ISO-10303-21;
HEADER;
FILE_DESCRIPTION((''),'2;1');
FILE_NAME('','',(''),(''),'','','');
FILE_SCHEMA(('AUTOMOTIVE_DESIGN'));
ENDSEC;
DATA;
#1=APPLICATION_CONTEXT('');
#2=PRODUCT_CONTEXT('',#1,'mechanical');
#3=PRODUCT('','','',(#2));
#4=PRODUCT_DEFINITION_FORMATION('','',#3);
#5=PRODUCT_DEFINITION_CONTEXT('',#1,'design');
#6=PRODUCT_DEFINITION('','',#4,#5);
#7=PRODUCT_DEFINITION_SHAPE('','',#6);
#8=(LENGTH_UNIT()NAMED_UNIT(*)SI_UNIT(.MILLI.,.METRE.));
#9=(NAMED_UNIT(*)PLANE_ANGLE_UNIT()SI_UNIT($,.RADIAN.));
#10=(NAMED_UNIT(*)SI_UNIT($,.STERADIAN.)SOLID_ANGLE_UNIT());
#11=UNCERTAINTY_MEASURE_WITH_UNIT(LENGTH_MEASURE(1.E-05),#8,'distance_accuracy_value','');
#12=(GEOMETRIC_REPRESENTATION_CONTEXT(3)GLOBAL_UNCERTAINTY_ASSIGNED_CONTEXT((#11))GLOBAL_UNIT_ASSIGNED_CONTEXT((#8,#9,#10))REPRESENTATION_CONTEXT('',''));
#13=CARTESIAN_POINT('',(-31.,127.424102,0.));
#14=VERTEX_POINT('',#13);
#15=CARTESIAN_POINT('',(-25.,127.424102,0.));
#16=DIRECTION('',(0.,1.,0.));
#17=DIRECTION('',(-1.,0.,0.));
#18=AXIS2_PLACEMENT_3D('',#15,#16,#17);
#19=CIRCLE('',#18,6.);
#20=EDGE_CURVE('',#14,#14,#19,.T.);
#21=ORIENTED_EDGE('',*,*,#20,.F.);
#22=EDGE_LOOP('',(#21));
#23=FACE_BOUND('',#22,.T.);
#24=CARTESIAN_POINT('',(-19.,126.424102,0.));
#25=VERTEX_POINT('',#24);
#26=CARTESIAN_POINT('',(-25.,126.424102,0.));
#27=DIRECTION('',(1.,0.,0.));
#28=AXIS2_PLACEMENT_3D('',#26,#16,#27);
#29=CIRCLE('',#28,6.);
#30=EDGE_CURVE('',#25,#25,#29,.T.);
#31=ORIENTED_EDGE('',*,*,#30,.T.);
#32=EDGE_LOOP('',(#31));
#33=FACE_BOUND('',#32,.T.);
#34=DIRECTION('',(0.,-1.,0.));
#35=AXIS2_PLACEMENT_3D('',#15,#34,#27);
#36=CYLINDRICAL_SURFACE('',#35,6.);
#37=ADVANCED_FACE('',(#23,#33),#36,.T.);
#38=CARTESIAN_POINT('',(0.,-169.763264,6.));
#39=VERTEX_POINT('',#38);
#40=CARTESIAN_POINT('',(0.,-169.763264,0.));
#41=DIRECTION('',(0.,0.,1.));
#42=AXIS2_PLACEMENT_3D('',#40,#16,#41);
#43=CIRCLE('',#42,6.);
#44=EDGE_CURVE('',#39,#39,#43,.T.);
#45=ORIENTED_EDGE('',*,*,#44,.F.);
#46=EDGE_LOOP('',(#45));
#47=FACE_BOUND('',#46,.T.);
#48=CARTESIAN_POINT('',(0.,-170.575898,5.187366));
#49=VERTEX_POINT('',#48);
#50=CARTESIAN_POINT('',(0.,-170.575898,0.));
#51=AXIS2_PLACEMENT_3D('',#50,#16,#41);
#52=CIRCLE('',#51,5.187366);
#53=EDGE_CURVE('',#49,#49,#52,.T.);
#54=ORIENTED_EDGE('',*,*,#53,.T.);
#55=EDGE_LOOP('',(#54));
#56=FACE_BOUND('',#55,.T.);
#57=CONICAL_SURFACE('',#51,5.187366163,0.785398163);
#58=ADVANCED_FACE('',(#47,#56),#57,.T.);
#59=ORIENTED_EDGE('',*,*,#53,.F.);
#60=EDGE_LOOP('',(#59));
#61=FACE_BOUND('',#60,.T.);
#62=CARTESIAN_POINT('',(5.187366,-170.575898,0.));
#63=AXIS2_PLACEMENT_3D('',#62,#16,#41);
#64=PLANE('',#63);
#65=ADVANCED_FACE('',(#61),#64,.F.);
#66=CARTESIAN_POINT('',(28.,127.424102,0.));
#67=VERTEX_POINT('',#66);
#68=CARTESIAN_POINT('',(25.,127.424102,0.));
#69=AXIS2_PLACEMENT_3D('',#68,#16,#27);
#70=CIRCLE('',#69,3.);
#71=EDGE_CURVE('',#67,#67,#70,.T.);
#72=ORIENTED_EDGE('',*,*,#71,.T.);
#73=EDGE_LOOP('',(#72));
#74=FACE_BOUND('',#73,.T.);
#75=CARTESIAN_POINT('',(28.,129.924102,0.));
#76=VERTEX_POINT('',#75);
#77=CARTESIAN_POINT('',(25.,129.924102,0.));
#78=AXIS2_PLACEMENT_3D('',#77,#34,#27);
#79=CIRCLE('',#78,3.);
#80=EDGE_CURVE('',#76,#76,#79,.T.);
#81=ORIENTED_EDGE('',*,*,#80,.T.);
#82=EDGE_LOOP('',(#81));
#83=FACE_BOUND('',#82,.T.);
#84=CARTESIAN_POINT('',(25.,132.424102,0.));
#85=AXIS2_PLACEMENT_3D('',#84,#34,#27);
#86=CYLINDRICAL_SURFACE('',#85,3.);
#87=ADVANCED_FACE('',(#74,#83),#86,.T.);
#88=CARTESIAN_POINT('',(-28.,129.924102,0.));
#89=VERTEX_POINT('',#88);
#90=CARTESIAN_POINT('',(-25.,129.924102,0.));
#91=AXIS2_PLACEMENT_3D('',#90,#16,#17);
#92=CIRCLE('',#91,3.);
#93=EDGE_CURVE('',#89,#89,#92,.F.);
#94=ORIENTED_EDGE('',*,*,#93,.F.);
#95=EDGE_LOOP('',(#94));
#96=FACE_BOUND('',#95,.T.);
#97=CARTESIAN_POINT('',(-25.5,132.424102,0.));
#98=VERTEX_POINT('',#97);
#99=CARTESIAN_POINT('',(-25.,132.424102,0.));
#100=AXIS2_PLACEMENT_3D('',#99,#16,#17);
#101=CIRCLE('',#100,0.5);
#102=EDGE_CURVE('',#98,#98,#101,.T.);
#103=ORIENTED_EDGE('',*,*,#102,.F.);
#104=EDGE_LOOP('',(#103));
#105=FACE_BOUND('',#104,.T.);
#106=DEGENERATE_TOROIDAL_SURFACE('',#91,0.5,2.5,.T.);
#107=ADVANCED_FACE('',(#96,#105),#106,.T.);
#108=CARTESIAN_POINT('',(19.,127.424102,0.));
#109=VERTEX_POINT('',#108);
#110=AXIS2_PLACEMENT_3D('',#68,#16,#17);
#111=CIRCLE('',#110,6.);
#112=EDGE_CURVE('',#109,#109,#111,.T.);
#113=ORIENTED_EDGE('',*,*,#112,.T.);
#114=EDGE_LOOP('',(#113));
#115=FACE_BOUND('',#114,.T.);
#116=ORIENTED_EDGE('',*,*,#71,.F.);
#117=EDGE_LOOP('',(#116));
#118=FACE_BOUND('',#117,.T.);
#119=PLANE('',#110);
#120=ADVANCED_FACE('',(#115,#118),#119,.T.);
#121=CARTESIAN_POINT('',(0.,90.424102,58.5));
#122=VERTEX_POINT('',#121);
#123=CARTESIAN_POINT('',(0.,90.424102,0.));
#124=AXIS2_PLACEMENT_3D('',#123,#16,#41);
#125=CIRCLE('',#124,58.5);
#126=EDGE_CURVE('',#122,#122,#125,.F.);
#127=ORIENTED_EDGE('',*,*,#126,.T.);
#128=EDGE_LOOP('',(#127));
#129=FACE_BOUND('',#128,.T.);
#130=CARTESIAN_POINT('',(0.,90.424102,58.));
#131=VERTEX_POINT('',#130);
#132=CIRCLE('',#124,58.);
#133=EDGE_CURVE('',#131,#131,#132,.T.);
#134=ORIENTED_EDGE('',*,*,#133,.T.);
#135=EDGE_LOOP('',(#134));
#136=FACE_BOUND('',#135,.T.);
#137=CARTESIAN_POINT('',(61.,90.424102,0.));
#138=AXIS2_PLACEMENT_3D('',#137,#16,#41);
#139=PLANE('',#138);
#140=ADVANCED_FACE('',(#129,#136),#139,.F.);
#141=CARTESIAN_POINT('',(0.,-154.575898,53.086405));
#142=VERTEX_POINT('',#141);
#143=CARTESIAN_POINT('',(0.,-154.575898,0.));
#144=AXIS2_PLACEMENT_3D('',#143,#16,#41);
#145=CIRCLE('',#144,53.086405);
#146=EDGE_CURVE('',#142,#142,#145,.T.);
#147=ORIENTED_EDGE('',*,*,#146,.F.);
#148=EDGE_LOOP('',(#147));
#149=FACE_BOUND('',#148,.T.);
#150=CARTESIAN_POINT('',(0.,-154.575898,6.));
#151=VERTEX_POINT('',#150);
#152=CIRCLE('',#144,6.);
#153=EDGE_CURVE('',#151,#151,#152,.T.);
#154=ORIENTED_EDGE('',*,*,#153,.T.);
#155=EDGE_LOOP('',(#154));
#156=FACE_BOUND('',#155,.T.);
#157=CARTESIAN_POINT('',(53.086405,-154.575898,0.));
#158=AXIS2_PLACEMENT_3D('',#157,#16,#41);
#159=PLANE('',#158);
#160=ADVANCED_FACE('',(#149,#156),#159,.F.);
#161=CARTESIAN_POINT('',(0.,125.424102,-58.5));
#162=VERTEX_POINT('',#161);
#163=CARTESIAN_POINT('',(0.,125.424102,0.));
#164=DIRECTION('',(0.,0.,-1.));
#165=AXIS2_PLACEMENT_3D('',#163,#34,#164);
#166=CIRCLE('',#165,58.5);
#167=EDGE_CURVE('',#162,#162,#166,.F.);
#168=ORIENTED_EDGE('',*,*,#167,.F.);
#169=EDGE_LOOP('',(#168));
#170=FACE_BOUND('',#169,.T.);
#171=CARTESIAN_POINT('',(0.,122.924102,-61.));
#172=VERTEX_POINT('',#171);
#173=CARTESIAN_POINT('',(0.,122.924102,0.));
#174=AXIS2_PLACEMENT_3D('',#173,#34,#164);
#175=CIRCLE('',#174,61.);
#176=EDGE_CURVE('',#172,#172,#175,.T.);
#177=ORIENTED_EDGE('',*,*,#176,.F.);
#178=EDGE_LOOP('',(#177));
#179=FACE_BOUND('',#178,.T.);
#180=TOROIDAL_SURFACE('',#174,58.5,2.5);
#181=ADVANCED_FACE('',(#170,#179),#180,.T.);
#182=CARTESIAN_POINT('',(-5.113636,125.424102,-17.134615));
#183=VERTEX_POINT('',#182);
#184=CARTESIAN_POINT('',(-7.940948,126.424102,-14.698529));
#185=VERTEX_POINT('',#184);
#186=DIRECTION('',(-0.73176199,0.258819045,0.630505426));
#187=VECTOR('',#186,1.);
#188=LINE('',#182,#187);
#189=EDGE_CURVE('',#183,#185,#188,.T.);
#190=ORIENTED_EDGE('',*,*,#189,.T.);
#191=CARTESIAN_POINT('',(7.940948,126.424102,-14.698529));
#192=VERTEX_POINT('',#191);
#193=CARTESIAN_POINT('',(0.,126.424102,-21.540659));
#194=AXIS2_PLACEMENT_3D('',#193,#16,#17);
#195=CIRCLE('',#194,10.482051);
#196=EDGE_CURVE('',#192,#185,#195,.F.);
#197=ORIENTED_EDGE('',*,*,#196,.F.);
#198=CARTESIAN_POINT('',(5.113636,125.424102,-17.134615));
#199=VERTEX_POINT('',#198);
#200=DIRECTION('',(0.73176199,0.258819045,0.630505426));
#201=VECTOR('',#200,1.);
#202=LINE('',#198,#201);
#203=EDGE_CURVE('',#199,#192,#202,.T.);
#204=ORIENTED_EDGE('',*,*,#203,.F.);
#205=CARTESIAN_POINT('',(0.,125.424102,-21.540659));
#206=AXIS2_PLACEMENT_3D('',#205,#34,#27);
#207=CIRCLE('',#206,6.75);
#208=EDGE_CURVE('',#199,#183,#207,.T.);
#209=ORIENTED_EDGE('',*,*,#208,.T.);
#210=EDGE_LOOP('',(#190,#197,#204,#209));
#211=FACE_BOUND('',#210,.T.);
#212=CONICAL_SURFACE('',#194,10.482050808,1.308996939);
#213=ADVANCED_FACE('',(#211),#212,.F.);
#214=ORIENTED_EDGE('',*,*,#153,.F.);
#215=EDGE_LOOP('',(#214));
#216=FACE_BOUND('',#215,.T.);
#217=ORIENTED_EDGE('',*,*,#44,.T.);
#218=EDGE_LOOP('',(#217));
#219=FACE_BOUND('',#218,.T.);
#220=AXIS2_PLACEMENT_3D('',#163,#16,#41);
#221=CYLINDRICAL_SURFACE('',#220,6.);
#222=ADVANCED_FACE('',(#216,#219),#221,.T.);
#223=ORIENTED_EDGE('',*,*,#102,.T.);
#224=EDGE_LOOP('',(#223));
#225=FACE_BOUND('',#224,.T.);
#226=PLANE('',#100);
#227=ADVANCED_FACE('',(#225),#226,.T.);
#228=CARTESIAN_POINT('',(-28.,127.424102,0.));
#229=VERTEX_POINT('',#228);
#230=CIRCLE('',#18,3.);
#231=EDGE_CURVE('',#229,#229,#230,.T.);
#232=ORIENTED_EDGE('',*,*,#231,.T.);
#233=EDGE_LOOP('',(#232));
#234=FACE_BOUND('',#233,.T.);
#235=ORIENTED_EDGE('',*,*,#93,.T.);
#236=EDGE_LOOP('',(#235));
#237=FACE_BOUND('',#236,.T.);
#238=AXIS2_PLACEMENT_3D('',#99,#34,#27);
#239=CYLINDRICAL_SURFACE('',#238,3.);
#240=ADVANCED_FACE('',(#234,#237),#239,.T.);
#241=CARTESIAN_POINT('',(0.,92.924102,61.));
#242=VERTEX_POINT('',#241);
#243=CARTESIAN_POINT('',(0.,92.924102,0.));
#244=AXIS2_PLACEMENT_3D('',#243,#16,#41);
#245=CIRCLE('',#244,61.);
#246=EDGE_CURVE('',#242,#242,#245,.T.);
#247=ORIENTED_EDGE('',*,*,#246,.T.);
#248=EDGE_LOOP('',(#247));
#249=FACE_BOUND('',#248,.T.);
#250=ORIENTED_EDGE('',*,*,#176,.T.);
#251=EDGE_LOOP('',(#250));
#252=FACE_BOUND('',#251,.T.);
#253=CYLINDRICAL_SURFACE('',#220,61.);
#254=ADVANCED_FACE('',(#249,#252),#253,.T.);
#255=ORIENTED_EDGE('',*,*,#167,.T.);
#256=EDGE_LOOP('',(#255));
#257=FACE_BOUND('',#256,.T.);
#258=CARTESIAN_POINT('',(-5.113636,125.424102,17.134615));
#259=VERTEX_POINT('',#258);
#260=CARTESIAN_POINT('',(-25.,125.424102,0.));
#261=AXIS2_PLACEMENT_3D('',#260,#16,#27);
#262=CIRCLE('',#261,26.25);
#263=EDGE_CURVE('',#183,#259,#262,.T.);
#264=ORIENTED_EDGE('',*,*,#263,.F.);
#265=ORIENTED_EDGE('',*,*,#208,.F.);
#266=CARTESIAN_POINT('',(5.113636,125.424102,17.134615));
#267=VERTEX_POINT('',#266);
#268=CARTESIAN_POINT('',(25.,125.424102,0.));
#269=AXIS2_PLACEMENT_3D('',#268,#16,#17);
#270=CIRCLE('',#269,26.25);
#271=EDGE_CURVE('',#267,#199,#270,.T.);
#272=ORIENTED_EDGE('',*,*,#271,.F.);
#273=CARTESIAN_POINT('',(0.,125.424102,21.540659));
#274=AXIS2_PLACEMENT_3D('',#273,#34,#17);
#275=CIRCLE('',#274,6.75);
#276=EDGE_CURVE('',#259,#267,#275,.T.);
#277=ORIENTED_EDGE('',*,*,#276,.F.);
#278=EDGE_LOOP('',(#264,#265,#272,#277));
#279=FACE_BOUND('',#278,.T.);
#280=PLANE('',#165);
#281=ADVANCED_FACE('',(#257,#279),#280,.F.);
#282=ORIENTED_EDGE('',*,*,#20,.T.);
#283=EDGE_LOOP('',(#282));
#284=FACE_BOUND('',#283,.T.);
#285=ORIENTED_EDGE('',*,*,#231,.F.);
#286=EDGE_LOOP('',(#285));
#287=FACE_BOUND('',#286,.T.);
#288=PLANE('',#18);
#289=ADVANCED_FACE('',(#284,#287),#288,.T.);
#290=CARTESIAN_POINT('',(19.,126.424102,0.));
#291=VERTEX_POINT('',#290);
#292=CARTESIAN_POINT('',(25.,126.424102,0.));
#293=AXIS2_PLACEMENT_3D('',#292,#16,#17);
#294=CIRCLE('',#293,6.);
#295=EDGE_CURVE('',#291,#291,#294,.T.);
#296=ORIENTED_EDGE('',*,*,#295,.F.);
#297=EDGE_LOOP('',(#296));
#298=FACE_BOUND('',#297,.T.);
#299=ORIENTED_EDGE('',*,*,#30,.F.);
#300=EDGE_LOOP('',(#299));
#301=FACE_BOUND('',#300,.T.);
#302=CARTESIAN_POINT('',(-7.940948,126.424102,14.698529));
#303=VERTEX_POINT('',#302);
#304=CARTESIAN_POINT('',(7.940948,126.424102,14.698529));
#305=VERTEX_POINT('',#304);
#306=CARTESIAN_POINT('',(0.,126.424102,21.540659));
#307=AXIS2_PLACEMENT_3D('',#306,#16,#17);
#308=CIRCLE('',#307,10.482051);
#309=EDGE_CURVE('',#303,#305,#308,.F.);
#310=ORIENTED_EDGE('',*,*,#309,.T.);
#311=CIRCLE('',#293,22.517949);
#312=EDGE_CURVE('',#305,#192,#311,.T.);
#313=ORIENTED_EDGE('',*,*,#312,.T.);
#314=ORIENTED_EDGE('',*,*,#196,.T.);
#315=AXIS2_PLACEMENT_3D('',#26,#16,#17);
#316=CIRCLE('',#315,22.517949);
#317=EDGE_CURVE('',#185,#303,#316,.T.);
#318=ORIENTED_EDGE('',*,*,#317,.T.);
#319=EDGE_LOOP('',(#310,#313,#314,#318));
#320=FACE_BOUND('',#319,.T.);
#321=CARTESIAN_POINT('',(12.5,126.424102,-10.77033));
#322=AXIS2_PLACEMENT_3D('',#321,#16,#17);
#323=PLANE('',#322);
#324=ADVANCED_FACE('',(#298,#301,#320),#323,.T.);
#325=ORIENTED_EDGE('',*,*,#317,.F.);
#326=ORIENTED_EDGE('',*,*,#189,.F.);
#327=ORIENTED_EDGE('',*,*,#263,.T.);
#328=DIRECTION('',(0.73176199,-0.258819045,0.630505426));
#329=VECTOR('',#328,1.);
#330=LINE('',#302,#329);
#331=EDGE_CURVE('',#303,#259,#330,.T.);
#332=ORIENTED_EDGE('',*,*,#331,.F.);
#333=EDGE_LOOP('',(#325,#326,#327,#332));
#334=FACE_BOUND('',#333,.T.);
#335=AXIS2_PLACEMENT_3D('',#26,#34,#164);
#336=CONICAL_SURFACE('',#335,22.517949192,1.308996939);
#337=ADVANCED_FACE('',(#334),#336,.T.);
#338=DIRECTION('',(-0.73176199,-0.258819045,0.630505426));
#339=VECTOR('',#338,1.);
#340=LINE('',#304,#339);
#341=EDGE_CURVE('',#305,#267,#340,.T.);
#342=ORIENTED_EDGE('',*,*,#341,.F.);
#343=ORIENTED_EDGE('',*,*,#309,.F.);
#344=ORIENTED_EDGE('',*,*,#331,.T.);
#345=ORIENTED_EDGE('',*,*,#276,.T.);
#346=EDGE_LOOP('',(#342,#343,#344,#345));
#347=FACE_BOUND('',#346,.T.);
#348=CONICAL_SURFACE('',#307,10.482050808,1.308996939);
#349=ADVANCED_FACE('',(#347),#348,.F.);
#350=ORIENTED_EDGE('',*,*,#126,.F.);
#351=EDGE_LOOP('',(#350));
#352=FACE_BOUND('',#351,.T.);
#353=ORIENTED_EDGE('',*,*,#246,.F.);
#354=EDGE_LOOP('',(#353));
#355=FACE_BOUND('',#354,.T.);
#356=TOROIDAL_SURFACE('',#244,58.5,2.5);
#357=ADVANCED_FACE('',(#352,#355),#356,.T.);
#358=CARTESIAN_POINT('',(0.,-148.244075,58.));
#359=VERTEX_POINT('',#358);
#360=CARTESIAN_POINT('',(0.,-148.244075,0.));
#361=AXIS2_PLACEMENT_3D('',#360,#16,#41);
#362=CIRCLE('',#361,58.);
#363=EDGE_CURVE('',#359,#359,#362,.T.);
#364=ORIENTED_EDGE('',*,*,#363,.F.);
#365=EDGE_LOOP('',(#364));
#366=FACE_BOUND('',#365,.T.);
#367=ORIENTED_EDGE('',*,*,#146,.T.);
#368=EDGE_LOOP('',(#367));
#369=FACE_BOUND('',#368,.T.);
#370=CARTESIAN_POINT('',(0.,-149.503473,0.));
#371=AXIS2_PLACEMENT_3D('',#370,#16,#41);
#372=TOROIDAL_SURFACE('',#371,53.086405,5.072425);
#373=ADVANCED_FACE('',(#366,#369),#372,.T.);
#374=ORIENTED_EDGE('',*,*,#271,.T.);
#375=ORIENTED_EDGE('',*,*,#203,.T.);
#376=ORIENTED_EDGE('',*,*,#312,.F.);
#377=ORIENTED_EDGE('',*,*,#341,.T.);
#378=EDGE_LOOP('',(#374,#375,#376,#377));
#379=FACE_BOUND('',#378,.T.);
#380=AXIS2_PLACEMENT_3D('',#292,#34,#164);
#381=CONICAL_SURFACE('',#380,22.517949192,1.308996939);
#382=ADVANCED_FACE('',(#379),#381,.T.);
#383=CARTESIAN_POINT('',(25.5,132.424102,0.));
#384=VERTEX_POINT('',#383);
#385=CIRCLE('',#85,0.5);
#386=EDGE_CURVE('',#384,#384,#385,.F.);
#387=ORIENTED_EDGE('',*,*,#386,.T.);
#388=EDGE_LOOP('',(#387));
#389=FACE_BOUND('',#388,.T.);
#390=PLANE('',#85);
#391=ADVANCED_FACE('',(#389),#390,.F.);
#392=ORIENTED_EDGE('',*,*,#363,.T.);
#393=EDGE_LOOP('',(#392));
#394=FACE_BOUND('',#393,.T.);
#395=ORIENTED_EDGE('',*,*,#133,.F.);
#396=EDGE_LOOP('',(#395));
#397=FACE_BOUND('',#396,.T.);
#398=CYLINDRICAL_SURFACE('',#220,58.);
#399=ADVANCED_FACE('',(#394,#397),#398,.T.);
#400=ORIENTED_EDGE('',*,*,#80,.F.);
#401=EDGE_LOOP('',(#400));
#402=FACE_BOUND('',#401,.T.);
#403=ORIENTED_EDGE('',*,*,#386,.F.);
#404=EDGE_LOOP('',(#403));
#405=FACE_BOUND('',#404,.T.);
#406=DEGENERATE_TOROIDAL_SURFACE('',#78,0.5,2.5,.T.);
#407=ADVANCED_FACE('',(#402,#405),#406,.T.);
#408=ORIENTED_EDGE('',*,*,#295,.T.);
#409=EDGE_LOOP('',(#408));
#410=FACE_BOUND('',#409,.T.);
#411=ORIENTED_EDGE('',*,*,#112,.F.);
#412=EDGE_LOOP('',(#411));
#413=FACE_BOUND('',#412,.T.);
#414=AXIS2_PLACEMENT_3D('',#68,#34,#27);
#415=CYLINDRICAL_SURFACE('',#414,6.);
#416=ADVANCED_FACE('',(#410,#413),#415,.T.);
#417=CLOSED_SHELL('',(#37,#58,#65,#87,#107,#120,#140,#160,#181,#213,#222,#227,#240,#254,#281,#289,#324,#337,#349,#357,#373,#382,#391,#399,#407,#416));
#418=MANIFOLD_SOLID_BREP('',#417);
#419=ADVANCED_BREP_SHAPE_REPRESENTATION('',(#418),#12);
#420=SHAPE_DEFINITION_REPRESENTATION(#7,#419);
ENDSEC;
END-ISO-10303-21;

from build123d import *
from OCP.BRepFilletAPI import BRepFilletAPI_MakeChamfer

# Parameters (mm, degrees)
SKETCH2_R           = 6
BOSS_EXTRUDE1_DEPTH = 1
SKETCH3_R           = 6
BOSS_EXTRUDE2_DEPTH = 2
SKETCH4_R           = 3
BOSS_EXTRUDE3_DEPTH = 5
FILLET1_R           = 2.5
FILLET2_R           = 2.5
CHAMFER1_SIZE       = 1
CHAMFER1_SIZE_2     = 3.732050808


with BuildPart() as part:
    # Sketch1 → Revolve1 (revolve)
    with BuildSketch(Plane.XY, mode=Mode.PRIVATE) as revolve1_sk:
        with BuildLine():
            Line((0, 125.42410169), (61, 125.42410169))
            Line((61, 125.42410169), (61, 90.42410169))
            Line((61, 90.42410169), (58, 90.42410169))
            Line((58, 90.42410169), (58, -148.244074886))
            ThreePointArc((58, -148.244074886), (57.09375458, -152.613239536), (53.086404952, -154.57589831))
            Line((53.086404952, -154.57589831), (6, -154.57589831))
            Line((6, -154.57589831), (6, -169.763264473))
            Line((6, -169.763264473), (5.187366163, -170.57589831))
            Line((5.187366163, -170.57589831), (0, -170.57589831))
            Line((0, -170.57589831), (0, 125.42410169))
        make_face()
    revolve(revolve1_sk.sketch.rotate(Axis((0, 125.42410169, 0), (0, -1, 0)), 90), axis=Axis((0, 125.42410169, 0), (0, -1, 0)))

    # Sketch2 → Boss-Extrude1 (add)
    with BuildSketch(Plane(origin=(0, 125.42410169, 0), x_dir=(1, 0, 0), z_dir=(0, 1, 0))):
        with BuildLine():
            ThreePointArc((5.113636364, 17.134615295), (0, 14.790659229), (-5.113636364, 17.134615295))
            ThreePointArc((-5.113636364, 17.134615295), (-51.25, 0), (-5.113636364, -17.134615295))
            ThreePointArc((-5.113636364, -17.134615295), (0, -14.790659229), (5.113636364, -17.134615295))
            ThreePointArc((5.113636364, -17.134615295), (51.25, 0), (5.113636364, 17.134615295))
        make_face()
        with Locations(Location((25, 0, 0), (0, 0, 180))):
            Circle(SKETCH2_R, mode=Mode.SUBTRACT)
        with Locations((-25, 0)):
            Circle(SKETCH2_R, mode=Mode.SUBTRACT)
    extrude(amount=BOSS_EXTRUDE1_DEPTH)

    # Sketch3 → Boss-Extrude2 (add)
    with BuildSketch(Plane(origin=(0, 125.42410169, 0), x_dir=(1, 0, 0), z_dir=(0, 1, 0))):
        with Locations((-25, 0)):
            Circle(SKETCH3_R)
        with Locations(Location((25, 0, 0), (0, 0, 180))):
            Circle(SKETCH3_R)
    extrude(amount=BOSS_EXTRUDE2_DEPTH)

    # Sketch4 → Boss-Extrude3 (add)
    with BuildSketch(Plane(origin=(0, 127.42410169, 0), x_dir=(1, 0, 0), z_dir=(0, 1, 0))):
        with Locations((25, 0)):
            Circle(SKETCH4_R)
        with Locations(Location((-25, 0, 0), (0, 0, 180))):
            Circle(SKETCH4_R)
    extrude(amount=BOSS_EXTRUDE3_DEPTH)

    # Fillet1
    fillet1_edges = [part.edges().sort_by_distance(p)[0] for p in [
        (22, 132.42410169, 0),
        (-22, 132.42410169, 0),
    ]]
    fillet(fillet1_edges, radius=FILLET1_R)

    # Fillet2
    fillet2_edges = [part.edges().sort_by_distance(p)[0] for p in [
        (0, 90.42410169, -61),
        (0, 125.42410169, -61),
    ]]
    fillet(fillet2_edges, radius=FILLET2_R)

    # Chamfer1
    chamfer1_edges_1 = [part.edges().sort_by_distance(p)[0] for p in [
        (51.25, 126.42410169, 0),
    ]]
    chamfer1_side_1 = [part.faces().sort_by_distance(p)[0] for p in [
        (51.25, 126.40410169, 0),
    ]]
    chamfer1_edges_2 = [part.edges().sort_by_distance(p)[0] for p in [
        (0, 126.42410169, -14.790659229),
    ]]
    chamfer1_side_2 = [part.faces().sort_by_distance(p)[0] for p in [
        (0, 126.40410169, -14.790659229),
    ]]
    chamfer1_edges_3 = [part.edges().sort_by_distance(p)[0] for p in [
        (0, 126.42410169, 14.790659229),
    ]]
    chamfer1_side_3 = [part.faces().sort_by_distance(p)[0] for p in [
        (0, 126.40410169, 14.790659229),
    ]]
    chamfer1_edges_4 = [part.edges().sort_by_distance(p)[0] for p in [
        (-51.25, 126.42410169, 0),
    ]]
    chamfer1_side_4 = [part.faces().sort_by_distance(p)[0] for p in [
        (-51.25, 126.40410169, 0),
    ]]
    chamfer1 = BRepFilletAPI_MakeChamfer(part.part.solid().wrapped)
    for e in chamfer1_edges_1:
        chamfer1.Add(CHAMFER1_SIZE - 0.0001, CHAMFER1_SIZE_2 - 0.0001, e.wrapped, chamfer1_side_1[0].wrapped)
    for e in chamfer1_edges_2:
        chamfer1.Add(CHAMFER1_SIZE - 0.0001, CHAMFER1_SIZE_2 - 0.0001, e.wrapped, chamfer1_side_2[0].wrapped)
    for e in chamfer1_edges_3:
        chamfer1.Add(CHAMFER1_SIZE - 0.0001, CHAMFER1_SIZE_2 - 0.0001, e.wrapped, chamfer1_side_3[0].wrapped)
    for e in chamfer1_edges_4:
        chamfer1.Add(CHAMFER1_SIZE - 0.0001, CHAMFER1_SIZE_2 - 0.0001, e.wrapped, chamfer1_side_4[0].wrapped)
    add(Compound.cast(chamfer1.Shape()), mode=Mode.REPLACE)  # a hair under: the kernel refuses the full size


solid = part.part
